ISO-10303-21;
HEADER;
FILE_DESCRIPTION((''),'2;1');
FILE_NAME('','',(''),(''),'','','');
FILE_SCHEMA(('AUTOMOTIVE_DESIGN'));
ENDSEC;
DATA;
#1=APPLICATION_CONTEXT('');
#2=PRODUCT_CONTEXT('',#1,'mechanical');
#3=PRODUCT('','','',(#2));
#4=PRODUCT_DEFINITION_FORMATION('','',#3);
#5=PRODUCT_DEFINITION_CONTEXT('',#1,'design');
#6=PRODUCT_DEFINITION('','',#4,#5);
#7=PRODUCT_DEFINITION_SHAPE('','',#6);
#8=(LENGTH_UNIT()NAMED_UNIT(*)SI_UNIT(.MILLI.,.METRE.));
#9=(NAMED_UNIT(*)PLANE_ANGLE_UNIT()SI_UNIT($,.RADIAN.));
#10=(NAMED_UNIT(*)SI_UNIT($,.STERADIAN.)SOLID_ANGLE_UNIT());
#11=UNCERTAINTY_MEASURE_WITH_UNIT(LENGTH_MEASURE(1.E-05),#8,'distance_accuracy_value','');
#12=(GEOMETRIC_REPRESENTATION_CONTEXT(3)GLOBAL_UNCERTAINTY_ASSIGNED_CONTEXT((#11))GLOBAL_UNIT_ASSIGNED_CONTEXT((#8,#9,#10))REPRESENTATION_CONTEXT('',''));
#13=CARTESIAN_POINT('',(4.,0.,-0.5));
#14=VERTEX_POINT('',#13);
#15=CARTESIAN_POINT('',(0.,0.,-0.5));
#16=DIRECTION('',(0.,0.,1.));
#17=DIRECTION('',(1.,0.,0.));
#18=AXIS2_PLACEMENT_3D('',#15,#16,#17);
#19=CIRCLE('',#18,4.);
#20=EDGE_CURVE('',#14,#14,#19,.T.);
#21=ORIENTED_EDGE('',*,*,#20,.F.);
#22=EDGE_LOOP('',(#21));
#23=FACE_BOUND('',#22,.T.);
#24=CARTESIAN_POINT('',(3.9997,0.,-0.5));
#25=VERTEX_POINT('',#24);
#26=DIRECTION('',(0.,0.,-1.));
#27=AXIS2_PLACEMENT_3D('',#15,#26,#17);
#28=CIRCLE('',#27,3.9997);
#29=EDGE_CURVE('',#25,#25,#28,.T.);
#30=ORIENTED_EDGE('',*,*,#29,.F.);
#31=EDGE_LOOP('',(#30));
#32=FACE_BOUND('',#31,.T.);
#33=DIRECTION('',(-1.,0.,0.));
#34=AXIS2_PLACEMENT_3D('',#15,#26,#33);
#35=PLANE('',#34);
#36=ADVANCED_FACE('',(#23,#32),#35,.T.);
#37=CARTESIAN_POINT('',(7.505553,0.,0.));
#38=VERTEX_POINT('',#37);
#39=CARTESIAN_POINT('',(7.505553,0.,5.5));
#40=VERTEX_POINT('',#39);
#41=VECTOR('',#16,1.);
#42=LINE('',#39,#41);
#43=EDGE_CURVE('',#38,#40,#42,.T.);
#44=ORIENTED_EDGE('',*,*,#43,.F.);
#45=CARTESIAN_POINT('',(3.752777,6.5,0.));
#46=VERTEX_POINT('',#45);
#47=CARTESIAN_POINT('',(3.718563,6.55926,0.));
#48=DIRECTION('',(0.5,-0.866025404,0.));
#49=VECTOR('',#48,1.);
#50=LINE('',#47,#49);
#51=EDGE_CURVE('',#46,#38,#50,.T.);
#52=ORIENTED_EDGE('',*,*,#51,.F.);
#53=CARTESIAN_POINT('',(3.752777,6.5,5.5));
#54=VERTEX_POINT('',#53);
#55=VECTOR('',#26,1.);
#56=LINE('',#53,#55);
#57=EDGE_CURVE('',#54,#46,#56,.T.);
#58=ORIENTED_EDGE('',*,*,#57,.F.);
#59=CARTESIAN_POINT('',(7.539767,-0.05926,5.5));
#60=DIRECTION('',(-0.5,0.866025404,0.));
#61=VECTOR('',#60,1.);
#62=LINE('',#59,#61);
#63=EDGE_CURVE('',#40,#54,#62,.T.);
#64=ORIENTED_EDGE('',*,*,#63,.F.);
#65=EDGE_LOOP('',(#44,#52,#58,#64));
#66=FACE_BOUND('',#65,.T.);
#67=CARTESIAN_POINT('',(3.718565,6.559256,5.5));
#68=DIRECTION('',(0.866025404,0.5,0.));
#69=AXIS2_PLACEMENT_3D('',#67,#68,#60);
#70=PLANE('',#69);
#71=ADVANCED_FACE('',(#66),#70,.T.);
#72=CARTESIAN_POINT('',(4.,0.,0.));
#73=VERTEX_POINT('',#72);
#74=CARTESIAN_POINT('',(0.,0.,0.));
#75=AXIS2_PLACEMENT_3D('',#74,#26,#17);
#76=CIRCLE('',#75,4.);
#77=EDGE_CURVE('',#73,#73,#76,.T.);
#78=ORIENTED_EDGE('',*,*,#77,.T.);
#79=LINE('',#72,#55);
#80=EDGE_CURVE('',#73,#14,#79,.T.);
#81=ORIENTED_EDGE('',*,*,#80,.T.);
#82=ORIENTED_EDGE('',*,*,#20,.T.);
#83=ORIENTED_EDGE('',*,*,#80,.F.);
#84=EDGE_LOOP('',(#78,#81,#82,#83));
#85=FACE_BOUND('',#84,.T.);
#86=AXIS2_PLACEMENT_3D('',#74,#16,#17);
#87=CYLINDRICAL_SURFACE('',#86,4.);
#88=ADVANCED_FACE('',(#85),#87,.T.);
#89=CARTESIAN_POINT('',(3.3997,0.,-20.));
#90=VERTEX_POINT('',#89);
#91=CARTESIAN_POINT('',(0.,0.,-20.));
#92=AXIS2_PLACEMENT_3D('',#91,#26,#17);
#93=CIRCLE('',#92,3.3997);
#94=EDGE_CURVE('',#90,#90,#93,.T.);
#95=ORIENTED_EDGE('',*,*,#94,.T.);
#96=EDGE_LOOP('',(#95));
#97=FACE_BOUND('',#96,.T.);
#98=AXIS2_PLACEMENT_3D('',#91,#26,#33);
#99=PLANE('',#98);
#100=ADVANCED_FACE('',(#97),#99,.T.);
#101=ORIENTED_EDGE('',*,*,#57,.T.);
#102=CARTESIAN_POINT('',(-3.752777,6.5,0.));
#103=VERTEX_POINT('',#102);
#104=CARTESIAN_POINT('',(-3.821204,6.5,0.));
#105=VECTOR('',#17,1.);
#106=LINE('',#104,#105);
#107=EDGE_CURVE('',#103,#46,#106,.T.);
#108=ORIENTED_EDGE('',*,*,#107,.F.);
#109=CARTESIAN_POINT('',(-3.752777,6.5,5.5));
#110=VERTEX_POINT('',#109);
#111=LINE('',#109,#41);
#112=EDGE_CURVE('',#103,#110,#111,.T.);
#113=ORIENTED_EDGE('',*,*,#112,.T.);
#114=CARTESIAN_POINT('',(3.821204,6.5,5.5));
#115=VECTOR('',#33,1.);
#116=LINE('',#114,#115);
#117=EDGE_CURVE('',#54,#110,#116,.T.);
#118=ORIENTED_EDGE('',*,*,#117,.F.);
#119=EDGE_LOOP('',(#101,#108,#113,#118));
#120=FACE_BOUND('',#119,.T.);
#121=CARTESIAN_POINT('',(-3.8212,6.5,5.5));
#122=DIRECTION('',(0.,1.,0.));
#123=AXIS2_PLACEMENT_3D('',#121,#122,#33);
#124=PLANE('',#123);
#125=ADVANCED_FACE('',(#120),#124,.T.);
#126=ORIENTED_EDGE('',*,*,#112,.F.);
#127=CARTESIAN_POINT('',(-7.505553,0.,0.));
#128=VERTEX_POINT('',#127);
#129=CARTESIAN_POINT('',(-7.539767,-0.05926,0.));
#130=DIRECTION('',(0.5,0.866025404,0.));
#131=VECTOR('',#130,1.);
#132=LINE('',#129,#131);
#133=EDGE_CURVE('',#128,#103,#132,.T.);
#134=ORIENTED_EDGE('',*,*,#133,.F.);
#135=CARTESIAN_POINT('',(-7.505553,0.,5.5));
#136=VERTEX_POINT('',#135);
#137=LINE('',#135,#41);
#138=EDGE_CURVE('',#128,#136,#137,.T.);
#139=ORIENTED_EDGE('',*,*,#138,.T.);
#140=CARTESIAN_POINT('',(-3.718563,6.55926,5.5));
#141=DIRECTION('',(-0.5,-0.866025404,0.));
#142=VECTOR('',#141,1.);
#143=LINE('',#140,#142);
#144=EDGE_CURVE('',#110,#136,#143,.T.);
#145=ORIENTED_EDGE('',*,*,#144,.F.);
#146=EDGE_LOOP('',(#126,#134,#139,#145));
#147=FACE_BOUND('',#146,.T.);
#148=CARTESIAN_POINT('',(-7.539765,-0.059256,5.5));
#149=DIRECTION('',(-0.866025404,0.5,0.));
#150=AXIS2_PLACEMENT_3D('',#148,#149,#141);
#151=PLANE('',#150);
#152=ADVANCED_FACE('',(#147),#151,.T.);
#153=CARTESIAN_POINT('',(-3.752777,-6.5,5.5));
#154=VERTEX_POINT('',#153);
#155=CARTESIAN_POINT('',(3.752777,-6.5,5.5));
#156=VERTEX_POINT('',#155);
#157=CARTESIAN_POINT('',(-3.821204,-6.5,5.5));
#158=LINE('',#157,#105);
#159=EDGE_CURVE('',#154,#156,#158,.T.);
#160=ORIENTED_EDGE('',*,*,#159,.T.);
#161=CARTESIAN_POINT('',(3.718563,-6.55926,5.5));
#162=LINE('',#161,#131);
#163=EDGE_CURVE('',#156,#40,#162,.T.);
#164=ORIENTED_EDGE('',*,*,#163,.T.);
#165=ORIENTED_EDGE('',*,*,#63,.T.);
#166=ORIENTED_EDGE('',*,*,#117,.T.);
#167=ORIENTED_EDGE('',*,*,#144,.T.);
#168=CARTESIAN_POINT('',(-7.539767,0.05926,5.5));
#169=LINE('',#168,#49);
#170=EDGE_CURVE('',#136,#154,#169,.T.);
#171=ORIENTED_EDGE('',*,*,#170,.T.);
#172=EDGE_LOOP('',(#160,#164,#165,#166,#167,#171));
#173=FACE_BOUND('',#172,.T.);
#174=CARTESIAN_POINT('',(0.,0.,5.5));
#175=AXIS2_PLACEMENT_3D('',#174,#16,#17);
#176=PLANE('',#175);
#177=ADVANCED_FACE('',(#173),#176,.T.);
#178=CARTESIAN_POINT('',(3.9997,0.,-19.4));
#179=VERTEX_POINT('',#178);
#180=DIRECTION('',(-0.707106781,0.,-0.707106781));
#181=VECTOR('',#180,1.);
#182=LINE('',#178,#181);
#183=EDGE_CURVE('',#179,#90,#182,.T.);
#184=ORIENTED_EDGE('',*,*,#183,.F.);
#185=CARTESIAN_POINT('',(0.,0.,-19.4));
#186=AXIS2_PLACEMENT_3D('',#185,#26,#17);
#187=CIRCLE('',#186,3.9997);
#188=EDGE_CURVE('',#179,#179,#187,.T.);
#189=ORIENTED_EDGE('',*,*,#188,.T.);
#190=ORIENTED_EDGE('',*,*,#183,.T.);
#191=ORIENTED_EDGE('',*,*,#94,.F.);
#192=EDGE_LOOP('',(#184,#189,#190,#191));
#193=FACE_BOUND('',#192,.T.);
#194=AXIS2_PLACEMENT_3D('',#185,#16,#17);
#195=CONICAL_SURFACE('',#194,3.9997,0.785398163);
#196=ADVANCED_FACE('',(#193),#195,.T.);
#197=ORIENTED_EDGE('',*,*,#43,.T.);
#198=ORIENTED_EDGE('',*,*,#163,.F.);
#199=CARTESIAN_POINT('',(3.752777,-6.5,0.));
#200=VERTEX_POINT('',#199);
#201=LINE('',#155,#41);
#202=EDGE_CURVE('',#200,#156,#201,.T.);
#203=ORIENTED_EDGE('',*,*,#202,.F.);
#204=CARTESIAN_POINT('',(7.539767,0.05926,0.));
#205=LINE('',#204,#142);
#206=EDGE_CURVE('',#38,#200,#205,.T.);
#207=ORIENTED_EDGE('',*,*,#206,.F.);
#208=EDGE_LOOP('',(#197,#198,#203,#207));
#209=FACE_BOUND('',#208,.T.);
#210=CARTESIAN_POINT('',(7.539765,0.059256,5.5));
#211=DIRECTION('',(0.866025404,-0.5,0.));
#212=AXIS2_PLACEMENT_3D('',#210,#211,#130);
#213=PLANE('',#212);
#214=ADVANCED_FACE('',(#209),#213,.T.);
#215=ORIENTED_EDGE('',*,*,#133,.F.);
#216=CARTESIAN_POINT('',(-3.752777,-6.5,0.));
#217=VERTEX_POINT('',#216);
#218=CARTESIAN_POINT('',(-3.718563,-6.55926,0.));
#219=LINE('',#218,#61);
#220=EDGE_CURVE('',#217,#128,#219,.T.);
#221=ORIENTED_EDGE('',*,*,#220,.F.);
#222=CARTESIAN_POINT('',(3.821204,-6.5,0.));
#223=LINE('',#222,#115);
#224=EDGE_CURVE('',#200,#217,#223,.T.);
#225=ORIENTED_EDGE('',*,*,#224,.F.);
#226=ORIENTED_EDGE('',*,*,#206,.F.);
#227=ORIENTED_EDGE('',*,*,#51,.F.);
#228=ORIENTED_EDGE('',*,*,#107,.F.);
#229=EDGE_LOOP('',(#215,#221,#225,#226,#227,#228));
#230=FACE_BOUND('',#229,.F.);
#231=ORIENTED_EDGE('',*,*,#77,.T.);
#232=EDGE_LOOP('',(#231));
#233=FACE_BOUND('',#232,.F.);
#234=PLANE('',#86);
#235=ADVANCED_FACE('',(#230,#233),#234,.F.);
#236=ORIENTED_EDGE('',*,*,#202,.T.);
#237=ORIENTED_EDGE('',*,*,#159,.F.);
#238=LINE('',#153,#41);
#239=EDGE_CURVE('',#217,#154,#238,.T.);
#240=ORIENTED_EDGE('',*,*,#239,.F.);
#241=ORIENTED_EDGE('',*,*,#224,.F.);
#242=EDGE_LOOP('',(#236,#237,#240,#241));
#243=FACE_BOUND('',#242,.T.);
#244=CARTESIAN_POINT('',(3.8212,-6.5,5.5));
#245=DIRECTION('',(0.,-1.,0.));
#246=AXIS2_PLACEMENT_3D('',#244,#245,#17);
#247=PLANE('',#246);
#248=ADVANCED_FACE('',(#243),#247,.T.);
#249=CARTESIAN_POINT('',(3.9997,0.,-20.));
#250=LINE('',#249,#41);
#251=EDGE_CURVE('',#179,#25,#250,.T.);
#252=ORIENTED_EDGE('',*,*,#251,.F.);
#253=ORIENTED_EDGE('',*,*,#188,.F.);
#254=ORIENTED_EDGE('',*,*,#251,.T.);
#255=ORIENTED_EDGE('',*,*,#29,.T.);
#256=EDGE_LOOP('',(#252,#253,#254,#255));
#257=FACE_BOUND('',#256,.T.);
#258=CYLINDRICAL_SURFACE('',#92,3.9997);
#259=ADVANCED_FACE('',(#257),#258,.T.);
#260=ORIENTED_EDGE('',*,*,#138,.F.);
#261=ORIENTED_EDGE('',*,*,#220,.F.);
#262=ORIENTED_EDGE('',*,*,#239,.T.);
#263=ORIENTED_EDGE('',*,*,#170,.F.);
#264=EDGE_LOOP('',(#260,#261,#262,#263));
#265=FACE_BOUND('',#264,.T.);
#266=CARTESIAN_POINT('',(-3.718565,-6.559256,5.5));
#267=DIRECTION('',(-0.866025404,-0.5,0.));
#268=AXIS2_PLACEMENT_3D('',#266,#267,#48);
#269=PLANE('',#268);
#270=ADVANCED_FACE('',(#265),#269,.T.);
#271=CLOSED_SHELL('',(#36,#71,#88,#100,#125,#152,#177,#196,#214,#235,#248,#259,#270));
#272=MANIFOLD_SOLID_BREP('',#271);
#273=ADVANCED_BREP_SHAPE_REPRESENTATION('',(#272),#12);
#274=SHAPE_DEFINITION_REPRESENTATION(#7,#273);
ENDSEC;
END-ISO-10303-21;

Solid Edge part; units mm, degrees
sketch "Sketch1" plane through (0, 0, 0) normal (0, 0, 1) x (1, 0, 0)
  circle A0 centre (0, 0) radius 7.54
  dimension "D1" = 15.08
extrude "Protrusion1" add sketch "Sketch1" along normal blind 5.5
sketch "Sketch2" plane through (0, 0, 0) normal (0, 0, -1) x (1, 0, 0)
  circle A0 centre (0, 0) radius 4
extrude "Protrusion2" add sketch "Sketch2" along normal blind 20
sketch "Sketch3" plane through (0, 0, -20) normal (0, 0, -1) x (1, 0, 0)
  circle A0 centre (0, 0) radius 3.9997
extrude "Cutout1" cut sketch "Sketch3" against normal blind 19.5 flip side to cut
chamfer "Chamfer_1" distance 0.6 angle 45 1 edges at (-3.9997, 0, -20)
sketch "Sketch4" plane through (0, 0, 5.5) normal (0, 0, 1) x (1, 0, 0)
  line L0 (-3.8212, 6.5) -> (3.8212, 6.5)
  dimension "D1" = 13
extrude "Cutout2" cut sketch "Sketch4" against normal up to next material side at (0, 6.55, 5.5)
pattern_circular "Pattern1" count 6 over 360 about axis through (0, 0, 5.5) along (0, 0, 1) of "Cutout2"
properties part number "24104785"
